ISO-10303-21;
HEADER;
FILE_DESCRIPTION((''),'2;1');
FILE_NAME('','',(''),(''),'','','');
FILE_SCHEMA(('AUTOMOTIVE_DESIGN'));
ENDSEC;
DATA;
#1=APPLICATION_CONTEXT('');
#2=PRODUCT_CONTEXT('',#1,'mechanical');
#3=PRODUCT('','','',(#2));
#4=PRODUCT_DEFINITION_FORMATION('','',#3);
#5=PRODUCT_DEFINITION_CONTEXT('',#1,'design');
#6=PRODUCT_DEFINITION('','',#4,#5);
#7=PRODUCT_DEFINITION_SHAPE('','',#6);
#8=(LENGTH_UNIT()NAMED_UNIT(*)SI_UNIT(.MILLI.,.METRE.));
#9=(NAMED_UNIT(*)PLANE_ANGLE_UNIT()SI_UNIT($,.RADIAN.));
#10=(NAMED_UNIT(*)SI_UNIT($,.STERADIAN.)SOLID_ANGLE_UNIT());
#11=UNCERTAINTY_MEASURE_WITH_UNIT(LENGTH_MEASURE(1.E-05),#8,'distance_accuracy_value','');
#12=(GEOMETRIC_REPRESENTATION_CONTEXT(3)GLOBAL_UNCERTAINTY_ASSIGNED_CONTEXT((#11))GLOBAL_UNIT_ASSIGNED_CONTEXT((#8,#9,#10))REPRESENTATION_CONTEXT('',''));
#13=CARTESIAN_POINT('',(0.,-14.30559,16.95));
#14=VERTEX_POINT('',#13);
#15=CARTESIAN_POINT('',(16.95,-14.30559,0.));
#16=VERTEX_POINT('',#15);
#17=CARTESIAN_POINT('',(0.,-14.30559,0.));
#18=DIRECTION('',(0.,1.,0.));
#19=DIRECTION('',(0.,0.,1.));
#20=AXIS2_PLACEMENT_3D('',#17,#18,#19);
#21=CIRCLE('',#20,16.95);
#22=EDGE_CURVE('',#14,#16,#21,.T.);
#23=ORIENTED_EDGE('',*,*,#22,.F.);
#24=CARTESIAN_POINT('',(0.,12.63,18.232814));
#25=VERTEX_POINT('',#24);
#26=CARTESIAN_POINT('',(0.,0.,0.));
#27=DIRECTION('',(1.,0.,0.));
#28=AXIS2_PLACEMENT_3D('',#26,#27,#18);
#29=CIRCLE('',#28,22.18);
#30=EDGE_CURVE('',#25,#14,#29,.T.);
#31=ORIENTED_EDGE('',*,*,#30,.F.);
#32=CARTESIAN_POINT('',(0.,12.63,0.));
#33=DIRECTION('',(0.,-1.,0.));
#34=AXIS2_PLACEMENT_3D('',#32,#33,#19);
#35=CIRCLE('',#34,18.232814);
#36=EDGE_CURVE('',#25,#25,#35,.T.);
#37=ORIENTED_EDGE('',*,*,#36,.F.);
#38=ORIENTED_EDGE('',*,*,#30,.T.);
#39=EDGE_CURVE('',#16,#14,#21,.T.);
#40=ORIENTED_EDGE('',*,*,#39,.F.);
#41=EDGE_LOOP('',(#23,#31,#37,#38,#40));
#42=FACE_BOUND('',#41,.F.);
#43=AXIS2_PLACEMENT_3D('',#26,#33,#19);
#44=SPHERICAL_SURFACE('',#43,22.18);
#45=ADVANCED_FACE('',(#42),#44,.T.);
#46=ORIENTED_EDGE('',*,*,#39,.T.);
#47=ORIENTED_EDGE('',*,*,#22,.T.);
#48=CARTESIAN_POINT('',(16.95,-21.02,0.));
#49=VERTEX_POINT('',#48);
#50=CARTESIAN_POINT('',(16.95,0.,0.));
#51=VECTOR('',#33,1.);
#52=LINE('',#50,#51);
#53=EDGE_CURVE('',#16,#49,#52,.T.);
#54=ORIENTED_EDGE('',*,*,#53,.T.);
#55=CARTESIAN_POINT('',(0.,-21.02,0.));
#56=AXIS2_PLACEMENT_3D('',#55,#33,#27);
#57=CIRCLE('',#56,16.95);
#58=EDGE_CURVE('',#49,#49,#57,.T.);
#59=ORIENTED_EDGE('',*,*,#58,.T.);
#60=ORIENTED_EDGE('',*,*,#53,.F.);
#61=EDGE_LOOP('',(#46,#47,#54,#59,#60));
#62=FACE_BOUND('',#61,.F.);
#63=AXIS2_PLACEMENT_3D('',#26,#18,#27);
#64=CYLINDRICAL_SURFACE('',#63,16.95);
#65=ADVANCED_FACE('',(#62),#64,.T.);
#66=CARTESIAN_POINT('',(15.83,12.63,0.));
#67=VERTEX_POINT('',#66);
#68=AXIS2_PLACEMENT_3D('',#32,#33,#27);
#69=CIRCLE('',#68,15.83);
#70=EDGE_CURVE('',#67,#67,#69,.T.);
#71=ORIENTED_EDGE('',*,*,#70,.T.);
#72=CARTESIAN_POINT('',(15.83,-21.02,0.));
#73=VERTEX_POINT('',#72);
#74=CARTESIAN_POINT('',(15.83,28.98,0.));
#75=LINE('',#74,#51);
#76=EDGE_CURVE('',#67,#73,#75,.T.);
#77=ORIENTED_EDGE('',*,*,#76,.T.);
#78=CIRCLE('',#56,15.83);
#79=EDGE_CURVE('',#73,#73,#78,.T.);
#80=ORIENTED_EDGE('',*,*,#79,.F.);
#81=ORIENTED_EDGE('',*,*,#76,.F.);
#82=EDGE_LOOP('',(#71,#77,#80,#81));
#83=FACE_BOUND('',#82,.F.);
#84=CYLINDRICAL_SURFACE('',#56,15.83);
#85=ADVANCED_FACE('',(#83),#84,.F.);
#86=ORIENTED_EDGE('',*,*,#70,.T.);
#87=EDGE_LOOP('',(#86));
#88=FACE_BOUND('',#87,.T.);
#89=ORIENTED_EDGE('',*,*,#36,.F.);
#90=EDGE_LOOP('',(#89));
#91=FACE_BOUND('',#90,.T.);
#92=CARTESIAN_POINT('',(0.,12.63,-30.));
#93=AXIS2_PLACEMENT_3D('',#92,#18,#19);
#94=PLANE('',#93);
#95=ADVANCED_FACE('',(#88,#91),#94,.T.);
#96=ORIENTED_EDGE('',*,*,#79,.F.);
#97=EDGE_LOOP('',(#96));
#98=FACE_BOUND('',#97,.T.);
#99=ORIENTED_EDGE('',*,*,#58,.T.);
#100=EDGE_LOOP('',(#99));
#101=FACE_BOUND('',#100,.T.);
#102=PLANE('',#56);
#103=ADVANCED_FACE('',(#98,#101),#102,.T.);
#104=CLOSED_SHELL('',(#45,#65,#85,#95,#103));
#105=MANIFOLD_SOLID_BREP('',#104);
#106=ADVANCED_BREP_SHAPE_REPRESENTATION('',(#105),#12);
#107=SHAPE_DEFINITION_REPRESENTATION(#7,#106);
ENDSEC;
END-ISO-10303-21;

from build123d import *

# Parameters (mm, degrees)
F2_R     = 16.95
F3_DEPTH = 21.02
F4_R     = 15.83
F5_DEPTH = 50
F6_W     = 7.37
F6_H     = 60
F7_DEPTH = 50


with BuildPart() as f1:
    # F0 (on Right) → F1 (revolve)
    with BuildSketch(Plane.YZ):
        with BuildLine():
            Line((-22.18, 0), (22.18, 0))
            ThreePointArc((22.18, 0), (0, 22.18), (-22.18, 0))
        make_face()
    revolve(axis=Axis((0, 3.1962443806, 0), (0, 1, 0)))

    # F2 (on Front) → F3 (join)
    with BuildSketch(Plane.XZ):
        Circle(F2_R)
    extrude(amount=F3_DEPTH)

    # F4 (on face) → F5 (cut, symmetric)
    with BuildSketch(Plane.XZ.offset(21.02)):
        Circle(F4_R)
    extrude(amount=F5_DEPTH, both=True, mode=Mode.SUBTRACT)

    # F6 (on Right) → F7 (cut, symmetric)
    with BuildSketch(Plane.YZ):
        with Locations((16.315, 0)):
            Rectangle(F6_W, F6_H)
    extrude(amount=F7_DEPTH, both=True, mode=Mode.SUBTRACT)


solid = f1.part
